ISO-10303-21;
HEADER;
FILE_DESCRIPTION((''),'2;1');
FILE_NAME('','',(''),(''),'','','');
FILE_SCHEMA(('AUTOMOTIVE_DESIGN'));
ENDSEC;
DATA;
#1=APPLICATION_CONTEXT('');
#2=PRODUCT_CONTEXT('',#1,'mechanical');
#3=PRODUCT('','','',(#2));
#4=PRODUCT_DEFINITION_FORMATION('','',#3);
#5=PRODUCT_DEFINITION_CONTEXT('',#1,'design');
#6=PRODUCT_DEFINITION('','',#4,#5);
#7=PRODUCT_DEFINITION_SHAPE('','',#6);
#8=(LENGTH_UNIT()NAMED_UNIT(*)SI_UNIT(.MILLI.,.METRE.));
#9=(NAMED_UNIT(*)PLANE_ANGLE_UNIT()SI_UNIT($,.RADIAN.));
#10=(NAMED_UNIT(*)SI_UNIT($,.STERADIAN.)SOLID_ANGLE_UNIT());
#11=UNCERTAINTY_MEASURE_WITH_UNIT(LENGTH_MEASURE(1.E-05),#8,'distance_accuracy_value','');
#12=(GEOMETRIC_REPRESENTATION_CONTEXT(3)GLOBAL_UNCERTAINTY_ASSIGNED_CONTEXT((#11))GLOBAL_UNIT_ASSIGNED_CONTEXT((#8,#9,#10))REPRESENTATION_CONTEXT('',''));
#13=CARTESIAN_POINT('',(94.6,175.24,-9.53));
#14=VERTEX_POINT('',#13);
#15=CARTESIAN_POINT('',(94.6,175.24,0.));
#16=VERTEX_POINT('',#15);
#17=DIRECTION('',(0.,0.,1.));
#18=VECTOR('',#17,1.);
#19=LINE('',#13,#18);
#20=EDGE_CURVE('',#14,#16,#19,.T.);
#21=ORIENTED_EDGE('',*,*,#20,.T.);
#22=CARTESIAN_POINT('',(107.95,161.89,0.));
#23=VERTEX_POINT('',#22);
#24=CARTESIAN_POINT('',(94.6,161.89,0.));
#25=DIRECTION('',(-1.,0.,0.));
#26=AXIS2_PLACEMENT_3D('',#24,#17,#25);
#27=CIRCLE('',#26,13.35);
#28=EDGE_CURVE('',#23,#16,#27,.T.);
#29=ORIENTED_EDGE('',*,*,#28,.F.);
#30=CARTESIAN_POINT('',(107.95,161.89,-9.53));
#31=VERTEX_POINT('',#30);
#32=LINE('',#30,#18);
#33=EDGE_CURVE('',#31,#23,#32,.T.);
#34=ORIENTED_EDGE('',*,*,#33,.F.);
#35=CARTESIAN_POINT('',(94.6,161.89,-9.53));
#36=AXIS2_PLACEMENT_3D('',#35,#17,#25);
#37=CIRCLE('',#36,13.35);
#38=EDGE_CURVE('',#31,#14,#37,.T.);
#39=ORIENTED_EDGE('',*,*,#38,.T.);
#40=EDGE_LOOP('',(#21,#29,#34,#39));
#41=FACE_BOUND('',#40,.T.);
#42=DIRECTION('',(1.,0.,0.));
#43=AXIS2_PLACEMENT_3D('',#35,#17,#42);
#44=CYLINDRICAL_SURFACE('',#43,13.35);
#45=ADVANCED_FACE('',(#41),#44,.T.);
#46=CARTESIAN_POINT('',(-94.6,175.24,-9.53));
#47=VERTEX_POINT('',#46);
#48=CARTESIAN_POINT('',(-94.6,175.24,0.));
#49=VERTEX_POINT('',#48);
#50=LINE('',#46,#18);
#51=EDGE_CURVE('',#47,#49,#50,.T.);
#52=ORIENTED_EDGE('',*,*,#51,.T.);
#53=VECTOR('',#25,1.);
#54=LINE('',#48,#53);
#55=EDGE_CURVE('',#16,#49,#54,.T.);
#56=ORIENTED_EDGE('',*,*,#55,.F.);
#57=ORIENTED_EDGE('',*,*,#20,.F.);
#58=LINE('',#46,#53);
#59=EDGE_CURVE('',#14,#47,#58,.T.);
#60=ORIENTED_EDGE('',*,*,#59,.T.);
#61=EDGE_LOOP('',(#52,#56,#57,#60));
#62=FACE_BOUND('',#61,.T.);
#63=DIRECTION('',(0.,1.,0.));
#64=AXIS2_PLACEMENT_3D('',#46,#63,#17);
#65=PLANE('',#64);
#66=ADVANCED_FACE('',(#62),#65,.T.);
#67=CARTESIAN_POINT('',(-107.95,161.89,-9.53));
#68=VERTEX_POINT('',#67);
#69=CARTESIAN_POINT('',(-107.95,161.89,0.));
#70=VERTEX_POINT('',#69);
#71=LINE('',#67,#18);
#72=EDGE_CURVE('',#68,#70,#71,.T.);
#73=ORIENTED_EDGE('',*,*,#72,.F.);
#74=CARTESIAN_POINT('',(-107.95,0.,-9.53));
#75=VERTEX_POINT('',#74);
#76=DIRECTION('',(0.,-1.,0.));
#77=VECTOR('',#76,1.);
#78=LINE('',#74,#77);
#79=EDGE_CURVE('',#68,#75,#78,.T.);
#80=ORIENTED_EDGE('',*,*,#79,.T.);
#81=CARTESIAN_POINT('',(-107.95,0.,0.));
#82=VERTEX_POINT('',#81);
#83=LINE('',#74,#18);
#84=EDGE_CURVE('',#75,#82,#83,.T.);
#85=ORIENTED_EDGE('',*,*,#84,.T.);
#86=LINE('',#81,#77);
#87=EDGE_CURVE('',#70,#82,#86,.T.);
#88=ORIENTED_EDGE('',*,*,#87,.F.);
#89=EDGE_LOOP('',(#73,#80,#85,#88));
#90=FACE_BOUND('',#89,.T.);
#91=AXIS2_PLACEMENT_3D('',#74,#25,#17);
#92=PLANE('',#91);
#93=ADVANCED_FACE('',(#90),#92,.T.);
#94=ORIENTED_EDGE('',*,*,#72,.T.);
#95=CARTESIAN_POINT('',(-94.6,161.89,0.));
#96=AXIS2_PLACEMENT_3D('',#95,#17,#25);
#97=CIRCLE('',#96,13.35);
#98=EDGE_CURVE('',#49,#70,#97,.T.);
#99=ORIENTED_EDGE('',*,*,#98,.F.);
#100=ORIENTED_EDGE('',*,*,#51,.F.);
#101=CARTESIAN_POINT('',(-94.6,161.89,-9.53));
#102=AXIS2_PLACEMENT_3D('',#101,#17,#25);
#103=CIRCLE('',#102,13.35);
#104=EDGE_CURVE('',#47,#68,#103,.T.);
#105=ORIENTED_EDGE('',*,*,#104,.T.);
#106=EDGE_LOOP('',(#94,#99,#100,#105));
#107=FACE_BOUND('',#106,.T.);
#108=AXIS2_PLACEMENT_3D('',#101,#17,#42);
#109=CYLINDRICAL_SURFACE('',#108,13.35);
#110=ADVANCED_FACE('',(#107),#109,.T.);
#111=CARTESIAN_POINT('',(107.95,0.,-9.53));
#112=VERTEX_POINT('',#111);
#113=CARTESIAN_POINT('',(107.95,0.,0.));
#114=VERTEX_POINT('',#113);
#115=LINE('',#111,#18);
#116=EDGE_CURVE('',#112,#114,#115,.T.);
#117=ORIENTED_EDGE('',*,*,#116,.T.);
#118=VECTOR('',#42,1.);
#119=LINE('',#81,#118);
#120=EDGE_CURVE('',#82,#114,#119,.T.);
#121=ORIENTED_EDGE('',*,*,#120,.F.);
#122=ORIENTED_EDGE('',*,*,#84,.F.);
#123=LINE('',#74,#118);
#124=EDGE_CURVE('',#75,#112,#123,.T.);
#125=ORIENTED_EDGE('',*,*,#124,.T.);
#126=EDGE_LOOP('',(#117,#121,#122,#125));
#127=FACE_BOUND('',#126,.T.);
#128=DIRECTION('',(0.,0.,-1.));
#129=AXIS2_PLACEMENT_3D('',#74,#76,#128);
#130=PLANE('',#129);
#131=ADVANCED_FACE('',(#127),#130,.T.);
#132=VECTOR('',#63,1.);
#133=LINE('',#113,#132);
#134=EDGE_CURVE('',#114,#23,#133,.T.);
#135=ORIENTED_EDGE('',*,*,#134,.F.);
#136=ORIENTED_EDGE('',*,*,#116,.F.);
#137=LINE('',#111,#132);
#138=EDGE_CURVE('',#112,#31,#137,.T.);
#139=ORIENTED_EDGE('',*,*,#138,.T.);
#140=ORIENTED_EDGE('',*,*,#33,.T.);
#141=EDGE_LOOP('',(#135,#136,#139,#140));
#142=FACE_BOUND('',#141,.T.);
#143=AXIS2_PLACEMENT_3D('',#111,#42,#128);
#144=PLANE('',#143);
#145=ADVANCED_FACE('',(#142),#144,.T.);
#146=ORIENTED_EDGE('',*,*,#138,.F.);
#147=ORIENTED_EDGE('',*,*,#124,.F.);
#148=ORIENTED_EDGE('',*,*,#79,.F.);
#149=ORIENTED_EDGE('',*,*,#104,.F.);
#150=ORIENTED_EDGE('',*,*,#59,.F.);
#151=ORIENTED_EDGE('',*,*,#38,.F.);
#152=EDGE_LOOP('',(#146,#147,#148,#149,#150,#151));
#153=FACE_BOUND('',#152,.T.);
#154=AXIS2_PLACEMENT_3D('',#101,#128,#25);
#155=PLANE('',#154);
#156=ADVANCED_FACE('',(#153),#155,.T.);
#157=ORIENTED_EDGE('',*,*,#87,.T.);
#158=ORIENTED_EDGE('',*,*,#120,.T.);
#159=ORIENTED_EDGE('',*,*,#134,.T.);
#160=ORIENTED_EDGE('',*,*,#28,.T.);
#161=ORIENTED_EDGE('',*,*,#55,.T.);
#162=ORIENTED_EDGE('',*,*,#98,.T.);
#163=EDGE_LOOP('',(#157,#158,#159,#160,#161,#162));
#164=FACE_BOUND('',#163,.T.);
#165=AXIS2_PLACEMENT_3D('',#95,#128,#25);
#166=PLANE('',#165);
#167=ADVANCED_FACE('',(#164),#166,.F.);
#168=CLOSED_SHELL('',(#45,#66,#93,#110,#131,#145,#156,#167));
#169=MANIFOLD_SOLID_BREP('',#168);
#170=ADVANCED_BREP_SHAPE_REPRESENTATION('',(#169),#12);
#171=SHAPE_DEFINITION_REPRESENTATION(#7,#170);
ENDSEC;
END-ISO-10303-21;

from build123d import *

# Parameters (mm, degrees)
FLANGE_BASE1_DEPTH = 9.53


# Sheet-metal steps are written as plain solids
with BuildPart() as part:
    # Esboço1 → Flange-base1 (new body)
    with BuildSketch(Plane.XY):
        with BuildLine():
            Line((-107.95, 0), (107.95, 0))
            Line((107.95, 0), (107.95, 161.89))
            ThreePointArc((107.95, 161.89), (104.039875529, 171.329875529), (94.6, 175.24))
            Line((94.6, 175.24), (-94.6, 175.24))
            ThreePointArc((-94.6, 175.24), (-104.039875529, 171.329875529), (-107.95, 161.89))
            Line((-107.95, 161.89), (-107.95, 0))
        make_face()
    extrude(amount=-FLANGE_BASE1_DEPTH)


solid = part.part
